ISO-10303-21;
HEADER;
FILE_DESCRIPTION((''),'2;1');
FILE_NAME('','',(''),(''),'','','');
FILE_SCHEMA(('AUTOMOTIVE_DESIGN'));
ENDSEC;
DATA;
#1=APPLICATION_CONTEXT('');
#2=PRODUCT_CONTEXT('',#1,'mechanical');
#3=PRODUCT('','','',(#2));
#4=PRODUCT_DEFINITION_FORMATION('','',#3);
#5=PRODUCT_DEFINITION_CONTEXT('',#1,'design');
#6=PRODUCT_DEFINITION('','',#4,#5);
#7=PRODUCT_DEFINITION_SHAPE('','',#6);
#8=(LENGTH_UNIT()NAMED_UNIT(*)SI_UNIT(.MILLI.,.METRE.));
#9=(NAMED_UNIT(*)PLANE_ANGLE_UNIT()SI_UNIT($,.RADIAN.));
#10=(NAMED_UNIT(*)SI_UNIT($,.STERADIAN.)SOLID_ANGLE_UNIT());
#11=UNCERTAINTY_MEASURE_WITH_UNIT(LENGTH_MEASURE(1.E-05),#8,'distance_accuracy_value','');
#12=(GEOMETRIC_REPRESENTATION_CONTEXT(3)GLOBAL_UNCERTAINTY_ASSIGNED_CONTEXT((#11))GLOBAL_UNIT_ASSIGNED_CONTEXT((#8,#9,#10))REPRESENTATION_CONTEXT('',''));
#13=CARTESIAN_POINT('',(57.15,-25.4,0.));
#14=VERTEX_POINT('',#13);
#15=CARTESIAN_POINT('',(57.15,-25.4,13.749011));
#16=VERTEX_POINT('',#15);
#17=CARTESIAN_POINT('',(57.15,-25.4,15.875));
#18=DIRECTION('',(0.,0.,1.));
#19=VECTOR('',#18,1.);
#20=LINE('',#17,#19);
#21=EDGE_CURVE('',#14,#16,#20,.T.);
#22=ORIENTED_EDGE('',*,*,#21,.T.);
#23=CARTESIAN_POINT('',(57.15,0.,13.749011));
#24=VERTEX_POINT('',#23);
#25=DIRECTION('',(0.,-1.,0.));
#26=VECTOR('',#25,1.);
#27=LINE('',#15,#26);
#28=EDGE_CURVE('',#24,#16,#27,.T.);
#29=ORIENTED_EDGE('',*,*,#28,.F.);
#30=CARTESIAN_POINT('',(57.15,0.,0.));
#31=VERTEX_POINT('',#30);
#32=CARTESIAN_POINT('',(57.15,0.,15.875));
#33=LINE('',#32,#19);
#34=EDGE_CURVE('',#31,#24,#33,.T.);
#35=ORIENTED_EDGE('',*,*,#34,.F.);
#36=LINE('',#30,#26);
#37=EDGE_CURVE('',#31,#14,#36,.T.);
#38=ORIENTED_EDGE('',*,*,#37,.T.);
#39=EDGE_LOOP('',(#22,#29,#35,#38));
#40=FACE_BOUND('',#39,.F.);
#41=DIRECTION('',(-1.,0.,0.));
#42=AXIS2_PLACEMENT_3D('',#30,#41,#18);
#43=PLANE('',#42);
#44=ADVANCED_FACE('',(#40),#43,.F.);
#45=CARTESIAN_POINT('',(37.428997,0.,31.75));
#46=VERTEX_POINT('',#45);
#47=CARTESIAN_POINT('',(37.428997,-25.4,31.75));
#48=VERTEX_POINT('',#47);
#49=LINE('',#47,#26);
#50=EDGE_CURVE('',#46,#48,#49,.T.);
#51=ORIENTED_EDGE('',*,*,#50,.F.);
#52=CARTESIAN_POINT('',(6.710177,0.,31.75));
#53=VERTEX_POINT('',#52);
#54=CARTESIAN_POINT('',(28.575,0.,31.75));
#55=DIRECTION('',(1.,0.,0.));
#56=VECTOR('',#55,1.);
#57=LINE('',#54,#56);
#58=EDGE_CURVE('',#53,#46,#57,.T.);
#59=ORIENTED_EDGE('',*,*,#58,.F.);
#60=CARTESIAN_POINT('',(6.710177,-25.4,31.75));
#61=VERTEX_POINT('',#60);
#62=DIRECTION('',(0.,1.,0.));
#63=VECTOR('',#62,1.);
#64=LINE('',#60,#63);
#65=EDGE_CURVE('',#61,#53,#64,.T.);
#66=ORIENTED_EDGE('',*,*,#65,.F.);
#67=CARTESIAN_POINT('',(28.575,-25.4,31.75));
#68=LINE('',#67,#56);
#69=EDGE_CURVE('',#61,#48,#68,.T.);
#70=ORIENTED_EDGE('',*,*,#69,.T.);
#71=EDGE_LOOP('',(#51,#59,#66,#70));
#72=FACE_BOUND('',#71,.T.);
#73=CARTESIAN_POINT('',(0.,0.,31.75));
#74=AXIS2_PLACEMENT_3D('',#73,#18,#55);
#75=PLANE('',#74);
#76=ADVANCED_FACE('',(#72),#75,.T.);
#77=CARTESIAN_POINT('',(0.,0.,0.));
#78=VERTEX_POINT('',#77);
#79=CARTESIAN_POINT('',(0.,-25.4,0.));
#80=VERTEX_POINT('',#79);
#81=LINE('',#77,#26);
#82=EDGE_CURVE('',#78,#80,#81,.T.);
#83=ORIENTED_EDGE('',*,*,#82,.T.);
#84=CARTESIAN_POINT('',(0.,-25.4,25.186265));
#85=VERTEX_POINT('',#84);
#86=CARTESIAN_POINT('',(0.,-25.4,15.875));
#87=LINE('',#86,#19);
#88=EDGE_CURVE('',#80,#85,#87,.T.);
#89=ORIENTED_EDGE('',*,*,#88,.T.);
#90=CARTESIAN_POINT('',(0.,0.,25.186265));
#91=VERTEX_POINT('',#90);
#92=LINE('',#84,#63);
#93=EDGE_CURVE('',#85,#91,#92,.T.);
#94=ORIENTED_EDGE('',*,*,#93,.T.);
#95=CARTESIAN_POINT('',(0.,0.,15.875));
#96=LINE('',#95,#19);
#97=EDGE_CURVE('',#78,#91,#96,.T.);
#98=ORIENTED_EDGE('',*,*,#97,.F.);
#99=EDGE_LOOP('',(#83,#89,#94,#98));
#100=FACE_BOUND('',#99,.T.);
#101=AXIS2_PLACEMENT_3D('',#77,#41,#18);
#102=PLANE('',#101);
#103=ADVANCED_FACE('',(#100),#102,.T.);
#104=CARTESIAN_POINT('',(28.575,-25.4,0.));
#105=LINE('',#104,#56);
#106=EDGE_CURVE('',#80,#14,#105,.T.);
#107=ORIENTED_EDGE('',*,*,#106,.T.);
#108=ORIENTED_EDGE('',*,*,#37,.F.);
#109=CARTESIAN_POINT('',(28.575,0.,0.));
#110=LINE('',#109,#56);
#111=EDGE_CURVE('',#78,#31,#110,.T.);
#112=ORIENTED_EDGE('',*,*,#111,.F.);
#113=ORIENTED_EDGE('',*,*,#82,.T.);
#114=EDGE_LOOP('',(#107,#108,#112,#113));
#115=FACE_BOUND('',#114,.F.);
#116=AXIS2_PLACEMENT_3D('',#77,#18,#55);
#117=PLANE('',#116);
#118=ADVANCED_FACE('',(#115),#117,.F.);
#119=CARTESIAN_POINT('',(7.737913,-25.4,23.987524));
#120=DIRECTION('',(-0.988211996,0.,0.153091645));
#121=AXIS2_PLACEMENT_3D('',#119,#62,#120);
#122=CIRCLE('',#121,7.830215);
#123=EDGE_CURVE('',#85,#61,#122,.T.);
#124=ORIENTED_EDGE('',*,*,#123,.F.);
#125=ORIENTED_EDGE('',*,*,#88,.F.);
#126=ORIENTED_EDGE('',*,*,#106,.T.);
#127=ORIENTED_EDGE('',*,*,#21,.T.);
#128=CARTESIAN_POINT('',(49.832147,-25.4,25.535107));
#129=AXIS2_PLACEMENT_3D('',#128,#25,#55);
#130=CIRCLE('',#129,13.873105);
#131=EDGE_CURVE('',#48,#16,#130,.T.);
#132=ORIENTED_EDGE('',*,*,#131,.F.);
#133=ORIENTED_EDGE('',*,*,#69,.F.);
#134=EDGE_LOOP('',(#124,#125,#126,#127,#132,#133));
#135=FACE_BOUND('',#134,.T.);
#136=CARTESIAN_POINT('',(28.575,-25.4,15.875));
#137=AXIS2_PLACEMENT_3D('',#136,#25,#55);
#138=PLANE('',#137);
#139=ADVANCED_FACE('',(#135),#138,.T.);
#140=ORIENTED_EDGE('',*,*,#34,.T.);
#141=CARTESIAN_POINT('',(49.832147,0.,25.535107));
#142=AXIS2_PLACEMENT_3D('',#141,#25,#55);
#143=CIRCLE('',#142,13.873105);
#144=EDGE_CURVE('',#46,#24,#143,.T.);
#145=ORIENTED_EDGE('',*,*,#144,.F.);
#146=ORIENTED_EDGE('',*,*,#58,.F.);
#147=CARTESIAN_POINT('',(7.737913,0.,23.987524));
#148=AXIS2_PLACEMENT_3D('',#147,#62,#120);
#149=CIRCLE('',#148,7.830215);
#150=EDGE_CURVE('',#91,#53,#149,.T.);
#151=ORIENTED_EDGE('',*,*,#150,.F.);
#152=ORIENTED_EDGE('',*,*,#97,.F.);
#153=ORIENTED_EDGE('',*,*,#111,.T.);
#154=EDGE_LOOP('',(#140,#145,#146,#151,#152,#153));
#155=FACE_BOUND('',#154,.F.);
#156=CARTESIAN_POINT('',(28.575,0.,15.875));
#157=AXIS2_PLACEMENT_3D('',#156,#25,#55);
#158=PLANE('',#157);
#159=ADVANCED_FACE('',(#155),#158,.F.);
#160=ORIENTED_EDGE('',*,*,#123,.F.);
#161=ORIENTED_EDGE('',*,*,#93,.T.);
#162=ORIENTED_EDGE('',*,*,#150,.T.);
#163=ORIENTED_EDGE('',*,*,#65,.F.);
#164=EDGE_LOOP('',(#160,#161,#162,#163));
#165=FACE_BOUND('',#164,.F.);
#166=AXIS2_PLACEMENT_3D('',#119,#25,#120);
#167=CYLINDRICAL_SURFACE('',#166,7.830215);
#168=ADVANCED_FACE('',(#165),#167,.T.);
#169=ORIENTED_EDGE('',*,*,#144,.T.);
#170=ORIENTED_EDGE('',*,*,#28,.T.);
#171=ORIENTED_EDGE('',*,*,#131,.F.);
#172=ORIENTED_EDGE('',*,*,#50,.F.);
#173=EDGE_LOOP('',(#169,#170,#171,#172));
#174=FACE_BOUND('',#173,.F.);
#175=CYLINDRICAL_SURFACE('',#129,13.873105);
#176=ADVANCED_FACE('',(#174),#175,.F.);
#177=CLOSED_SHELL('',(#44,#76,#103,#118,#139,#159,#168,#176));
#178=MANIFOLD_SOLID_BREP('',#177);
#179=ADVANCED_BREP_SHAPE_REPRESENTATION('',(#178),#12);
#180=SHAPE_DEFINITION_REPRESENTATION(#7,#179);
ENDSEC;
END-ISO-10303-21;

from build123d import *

# Parameters (mm, degrees)
F0_W     = 57.15
F0_H     = 31.75
F1_DEPTH = 25.4
F3_DEPTH = 25.4
F5_R     = 13.8731046092
F6_DEPTH = 25.4


# Not quite as in the source:
# - a feature names something its author has since deleted; it is built from what else it names


with BuildPart() as f1:
    # F0 (on Front) → F1 (new body)
    with BuildSketch(Plane.XZ):
        with Locations((28.575, 15.875)):
            Rectangle(F0_W, F0_H)
    extrude(amount=F1_DEPTH)

    # F2 (on face) → F3 (cut)
    with BuildSketch(Plane.XZ.offset(25.4)):
        with BuildLine():
            ThreePointArc((0, 25.186264758), (2.2625309899, 29.5850653675), (6.7101765828, 31.75))
            Line((6.7101765828, 31.75), (0, 31.75))
            Line((0, 31.75), (0, 25.186264758))
        make_face()
    extrude(amount=-F3_DEPTH, mode=Mode.SUBTRACT)

    # F5 (on face) → F6 (cut)
    with BuildSketch(Plane.XZ.offset(25.4)):
        with Locations((49.8321466148, 25.5351066589)):
            Circle(F5_R)
    extrude(amount=-F6_DEPTH, mode=Mode.SUBTRACT)


solid = f1.part
